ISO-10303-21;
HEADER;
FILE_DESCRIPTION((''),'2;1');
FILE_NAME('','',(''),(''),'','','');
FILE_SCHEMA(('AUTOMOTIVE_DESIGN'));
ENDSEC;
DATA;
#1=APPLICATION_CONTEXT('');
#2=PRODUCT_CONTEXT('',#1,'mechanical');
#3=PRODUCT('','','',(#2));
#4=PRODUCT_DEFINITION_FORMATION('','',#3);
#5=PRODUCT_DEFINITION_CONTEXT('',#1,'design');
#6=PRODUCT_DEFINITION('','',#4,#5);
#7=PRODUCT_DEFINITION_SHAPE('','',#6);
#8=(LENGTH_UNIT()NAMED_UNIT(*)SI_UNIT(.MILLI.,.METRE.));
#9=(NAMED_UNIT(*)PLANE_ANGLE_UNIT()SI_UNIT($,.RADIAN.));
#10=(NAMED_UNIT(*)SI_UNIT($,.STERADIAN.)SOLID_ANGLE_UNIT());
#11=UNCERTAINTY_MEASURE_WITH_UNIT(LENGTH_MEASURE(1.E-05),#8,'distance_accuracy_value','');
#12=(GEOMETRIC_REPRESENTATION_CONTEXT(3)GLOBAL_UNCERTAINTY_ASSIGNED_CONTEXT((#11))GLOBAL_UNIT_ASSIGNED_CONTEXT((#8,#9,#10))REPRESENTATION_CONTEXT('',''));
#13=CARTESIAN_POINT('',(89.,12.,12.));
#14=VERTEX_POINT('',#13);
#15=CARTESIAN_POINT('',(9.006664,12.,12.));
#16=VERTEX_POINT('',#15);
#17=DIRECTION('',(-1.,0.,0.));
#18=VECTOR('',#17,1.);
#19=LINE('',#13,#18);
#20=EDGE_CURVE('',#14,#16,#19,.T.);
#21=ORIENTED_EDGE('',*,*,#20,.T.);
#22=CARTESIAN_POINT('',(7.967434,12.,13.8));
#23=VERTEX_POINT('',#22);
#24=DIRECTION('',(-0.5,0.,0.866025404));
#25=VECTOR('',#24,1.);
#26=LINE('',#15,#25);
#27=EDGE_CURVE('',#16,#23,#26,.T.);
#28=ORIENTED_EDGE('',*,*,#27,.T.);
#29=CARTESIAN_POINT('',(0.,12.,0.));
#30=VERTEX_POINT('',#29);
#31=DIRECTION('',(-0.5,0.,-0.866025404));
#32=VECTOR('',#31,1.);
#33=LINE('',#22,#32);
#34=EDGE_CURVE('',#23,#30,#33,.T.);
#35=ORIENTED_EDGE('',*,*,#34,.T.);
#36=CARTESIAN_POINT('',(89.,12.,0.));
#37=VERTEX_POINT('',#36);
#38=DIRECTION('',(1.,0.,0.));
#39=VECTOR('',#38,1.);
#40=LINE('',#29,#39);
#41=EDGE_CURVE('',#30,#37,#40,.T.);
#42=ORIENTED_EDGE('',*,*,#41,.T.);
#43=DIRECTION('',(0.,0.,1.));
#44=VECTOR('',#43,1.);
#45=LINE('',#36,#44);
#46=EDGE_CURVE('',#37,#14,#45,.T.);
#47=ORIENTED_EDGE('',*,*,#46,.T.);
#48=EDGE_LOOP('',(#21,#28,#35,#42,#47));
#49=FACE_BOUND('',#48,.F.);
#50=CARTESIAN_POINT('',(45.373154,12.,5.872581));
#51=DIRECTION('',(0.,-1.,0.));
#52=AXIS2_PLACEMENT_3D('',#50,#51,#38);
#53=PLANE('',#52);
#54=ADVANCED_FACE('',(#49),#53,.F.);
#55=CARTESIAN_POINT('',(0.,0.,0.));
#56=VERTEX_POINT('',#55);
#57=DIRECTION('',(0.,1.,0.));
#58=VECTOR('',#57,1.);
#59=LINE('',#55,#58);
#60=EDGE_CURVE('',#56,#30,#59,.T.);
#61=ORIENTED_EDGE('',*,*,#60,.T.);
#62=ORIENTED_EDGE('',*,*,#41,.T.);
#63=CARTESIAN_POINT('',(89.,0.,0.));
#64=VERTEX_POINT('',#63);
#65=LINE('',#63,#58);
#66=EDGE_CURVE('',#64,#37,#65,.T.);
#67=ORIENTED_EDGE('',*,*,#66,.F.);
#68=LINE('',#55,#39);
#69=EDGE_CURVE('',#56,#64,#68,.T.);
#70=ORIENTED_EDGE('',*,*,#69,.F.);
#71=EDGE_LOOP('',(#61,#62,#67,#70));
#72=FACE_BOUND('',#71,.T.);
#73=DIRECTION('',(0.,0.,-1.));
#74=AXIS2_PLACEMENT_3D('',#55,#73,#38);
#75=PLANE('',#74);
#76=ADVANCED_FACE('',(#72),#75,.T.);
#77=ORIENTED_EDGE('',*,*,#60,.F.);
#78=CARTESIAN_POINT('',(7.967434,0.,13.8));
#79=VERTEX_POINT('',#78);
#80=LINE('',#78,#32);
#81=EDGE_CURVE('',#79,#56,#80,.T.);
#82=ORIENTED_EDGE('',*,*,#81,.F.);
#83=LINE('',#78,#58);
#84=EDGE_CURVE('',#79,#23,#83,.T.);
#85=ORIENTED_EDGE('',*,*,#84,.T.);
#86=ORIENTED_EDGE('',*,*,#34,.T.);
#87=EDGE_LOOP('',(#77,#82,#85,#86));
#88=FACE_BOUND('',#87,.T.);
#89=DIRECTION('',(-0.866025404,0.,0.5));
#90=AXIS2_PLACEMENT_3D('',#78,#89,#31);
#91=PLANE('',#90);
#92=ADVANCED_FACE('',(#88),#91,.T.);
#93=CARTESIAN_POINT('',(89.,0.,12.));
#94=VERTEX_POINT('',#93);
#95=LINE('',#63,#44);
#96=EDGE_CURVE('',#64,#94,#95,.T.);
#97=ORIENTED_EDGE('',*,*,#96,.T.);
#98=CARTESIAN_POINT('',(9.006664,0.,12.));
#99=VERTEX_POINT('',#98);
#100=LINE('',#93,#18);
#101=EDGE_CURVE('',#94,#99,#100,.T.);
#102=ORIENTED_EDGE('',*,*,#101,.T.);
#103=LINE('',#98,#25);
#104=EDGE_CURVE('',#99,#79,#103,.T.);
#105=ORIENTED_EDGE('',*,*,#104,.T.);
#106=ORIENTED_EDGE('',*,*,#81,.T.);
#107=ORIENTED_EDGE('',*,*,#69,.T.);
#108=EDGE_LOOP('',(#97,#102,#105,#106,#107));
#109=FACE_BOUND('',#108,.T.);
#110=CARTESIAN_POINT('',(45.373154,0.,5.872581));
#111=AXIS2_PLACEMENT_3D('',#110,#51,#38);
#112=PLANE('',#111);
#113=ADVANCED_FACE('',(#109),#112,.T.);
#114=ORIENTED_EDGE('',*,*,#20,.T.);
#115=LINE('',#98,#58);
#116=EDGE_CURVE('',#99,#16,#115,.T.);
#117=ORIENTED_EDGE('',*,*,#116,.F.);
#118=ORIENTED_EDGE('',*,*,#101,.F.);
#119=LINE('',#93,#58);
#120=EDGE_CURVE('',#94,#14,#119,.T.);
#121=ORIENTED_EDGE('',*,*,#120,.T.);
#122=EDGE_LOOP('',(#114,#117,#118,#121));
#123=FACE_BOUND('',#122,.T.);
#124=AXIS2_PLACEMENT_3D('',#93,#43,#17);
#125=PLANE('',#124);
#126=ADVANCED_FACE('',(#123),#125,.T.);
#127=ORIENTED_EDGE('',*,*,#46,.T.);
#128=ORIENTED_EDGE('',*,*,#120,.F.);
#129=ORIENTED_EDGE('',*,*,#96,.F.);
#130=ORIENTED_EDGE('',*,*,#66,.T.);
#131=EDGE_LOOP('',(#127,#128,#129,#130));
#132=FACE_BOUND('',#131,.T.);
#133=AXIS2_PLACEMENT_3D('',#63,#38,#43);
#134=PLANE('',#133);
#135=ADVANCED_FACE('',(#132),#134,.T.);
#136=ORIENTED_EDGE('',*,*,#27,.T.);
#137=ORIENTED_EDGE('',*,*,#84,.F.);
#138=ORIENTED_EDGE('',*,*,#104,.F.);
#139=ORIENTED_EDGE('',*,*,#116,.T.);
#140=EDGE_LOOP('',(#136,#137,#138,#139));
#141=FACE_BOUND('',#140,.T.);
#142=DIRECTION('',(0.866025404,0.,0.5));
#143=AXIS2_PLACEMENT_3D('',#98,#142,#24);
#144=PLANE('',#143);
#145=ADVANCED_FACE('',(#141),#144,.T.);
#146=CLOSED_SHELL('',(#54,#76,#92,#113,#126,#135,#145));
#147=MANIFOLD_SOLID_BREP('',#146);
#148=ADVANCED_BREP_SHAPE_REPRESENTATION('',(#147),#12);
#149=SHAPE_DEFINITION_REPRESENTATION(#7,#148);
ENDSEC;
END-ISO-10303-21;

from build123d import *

# Parameters (mm, degrees)
F1_DEPTH = 12


# Not quite as in the source:
# - a feature names something its author has since deleted; it is built from what else it names


with BuildPart() as f1:
    # F0 (on Front) → F1 (new body)
    with BuildSketch(Plane.XZ):
        Polygon((7.9674337148, 13.8), (0, 0), (89, 0), (89, 12), (9.0066641994, 12), align=None)
    extrude(amount=-F1_DEPTH)


solid = f1.part
